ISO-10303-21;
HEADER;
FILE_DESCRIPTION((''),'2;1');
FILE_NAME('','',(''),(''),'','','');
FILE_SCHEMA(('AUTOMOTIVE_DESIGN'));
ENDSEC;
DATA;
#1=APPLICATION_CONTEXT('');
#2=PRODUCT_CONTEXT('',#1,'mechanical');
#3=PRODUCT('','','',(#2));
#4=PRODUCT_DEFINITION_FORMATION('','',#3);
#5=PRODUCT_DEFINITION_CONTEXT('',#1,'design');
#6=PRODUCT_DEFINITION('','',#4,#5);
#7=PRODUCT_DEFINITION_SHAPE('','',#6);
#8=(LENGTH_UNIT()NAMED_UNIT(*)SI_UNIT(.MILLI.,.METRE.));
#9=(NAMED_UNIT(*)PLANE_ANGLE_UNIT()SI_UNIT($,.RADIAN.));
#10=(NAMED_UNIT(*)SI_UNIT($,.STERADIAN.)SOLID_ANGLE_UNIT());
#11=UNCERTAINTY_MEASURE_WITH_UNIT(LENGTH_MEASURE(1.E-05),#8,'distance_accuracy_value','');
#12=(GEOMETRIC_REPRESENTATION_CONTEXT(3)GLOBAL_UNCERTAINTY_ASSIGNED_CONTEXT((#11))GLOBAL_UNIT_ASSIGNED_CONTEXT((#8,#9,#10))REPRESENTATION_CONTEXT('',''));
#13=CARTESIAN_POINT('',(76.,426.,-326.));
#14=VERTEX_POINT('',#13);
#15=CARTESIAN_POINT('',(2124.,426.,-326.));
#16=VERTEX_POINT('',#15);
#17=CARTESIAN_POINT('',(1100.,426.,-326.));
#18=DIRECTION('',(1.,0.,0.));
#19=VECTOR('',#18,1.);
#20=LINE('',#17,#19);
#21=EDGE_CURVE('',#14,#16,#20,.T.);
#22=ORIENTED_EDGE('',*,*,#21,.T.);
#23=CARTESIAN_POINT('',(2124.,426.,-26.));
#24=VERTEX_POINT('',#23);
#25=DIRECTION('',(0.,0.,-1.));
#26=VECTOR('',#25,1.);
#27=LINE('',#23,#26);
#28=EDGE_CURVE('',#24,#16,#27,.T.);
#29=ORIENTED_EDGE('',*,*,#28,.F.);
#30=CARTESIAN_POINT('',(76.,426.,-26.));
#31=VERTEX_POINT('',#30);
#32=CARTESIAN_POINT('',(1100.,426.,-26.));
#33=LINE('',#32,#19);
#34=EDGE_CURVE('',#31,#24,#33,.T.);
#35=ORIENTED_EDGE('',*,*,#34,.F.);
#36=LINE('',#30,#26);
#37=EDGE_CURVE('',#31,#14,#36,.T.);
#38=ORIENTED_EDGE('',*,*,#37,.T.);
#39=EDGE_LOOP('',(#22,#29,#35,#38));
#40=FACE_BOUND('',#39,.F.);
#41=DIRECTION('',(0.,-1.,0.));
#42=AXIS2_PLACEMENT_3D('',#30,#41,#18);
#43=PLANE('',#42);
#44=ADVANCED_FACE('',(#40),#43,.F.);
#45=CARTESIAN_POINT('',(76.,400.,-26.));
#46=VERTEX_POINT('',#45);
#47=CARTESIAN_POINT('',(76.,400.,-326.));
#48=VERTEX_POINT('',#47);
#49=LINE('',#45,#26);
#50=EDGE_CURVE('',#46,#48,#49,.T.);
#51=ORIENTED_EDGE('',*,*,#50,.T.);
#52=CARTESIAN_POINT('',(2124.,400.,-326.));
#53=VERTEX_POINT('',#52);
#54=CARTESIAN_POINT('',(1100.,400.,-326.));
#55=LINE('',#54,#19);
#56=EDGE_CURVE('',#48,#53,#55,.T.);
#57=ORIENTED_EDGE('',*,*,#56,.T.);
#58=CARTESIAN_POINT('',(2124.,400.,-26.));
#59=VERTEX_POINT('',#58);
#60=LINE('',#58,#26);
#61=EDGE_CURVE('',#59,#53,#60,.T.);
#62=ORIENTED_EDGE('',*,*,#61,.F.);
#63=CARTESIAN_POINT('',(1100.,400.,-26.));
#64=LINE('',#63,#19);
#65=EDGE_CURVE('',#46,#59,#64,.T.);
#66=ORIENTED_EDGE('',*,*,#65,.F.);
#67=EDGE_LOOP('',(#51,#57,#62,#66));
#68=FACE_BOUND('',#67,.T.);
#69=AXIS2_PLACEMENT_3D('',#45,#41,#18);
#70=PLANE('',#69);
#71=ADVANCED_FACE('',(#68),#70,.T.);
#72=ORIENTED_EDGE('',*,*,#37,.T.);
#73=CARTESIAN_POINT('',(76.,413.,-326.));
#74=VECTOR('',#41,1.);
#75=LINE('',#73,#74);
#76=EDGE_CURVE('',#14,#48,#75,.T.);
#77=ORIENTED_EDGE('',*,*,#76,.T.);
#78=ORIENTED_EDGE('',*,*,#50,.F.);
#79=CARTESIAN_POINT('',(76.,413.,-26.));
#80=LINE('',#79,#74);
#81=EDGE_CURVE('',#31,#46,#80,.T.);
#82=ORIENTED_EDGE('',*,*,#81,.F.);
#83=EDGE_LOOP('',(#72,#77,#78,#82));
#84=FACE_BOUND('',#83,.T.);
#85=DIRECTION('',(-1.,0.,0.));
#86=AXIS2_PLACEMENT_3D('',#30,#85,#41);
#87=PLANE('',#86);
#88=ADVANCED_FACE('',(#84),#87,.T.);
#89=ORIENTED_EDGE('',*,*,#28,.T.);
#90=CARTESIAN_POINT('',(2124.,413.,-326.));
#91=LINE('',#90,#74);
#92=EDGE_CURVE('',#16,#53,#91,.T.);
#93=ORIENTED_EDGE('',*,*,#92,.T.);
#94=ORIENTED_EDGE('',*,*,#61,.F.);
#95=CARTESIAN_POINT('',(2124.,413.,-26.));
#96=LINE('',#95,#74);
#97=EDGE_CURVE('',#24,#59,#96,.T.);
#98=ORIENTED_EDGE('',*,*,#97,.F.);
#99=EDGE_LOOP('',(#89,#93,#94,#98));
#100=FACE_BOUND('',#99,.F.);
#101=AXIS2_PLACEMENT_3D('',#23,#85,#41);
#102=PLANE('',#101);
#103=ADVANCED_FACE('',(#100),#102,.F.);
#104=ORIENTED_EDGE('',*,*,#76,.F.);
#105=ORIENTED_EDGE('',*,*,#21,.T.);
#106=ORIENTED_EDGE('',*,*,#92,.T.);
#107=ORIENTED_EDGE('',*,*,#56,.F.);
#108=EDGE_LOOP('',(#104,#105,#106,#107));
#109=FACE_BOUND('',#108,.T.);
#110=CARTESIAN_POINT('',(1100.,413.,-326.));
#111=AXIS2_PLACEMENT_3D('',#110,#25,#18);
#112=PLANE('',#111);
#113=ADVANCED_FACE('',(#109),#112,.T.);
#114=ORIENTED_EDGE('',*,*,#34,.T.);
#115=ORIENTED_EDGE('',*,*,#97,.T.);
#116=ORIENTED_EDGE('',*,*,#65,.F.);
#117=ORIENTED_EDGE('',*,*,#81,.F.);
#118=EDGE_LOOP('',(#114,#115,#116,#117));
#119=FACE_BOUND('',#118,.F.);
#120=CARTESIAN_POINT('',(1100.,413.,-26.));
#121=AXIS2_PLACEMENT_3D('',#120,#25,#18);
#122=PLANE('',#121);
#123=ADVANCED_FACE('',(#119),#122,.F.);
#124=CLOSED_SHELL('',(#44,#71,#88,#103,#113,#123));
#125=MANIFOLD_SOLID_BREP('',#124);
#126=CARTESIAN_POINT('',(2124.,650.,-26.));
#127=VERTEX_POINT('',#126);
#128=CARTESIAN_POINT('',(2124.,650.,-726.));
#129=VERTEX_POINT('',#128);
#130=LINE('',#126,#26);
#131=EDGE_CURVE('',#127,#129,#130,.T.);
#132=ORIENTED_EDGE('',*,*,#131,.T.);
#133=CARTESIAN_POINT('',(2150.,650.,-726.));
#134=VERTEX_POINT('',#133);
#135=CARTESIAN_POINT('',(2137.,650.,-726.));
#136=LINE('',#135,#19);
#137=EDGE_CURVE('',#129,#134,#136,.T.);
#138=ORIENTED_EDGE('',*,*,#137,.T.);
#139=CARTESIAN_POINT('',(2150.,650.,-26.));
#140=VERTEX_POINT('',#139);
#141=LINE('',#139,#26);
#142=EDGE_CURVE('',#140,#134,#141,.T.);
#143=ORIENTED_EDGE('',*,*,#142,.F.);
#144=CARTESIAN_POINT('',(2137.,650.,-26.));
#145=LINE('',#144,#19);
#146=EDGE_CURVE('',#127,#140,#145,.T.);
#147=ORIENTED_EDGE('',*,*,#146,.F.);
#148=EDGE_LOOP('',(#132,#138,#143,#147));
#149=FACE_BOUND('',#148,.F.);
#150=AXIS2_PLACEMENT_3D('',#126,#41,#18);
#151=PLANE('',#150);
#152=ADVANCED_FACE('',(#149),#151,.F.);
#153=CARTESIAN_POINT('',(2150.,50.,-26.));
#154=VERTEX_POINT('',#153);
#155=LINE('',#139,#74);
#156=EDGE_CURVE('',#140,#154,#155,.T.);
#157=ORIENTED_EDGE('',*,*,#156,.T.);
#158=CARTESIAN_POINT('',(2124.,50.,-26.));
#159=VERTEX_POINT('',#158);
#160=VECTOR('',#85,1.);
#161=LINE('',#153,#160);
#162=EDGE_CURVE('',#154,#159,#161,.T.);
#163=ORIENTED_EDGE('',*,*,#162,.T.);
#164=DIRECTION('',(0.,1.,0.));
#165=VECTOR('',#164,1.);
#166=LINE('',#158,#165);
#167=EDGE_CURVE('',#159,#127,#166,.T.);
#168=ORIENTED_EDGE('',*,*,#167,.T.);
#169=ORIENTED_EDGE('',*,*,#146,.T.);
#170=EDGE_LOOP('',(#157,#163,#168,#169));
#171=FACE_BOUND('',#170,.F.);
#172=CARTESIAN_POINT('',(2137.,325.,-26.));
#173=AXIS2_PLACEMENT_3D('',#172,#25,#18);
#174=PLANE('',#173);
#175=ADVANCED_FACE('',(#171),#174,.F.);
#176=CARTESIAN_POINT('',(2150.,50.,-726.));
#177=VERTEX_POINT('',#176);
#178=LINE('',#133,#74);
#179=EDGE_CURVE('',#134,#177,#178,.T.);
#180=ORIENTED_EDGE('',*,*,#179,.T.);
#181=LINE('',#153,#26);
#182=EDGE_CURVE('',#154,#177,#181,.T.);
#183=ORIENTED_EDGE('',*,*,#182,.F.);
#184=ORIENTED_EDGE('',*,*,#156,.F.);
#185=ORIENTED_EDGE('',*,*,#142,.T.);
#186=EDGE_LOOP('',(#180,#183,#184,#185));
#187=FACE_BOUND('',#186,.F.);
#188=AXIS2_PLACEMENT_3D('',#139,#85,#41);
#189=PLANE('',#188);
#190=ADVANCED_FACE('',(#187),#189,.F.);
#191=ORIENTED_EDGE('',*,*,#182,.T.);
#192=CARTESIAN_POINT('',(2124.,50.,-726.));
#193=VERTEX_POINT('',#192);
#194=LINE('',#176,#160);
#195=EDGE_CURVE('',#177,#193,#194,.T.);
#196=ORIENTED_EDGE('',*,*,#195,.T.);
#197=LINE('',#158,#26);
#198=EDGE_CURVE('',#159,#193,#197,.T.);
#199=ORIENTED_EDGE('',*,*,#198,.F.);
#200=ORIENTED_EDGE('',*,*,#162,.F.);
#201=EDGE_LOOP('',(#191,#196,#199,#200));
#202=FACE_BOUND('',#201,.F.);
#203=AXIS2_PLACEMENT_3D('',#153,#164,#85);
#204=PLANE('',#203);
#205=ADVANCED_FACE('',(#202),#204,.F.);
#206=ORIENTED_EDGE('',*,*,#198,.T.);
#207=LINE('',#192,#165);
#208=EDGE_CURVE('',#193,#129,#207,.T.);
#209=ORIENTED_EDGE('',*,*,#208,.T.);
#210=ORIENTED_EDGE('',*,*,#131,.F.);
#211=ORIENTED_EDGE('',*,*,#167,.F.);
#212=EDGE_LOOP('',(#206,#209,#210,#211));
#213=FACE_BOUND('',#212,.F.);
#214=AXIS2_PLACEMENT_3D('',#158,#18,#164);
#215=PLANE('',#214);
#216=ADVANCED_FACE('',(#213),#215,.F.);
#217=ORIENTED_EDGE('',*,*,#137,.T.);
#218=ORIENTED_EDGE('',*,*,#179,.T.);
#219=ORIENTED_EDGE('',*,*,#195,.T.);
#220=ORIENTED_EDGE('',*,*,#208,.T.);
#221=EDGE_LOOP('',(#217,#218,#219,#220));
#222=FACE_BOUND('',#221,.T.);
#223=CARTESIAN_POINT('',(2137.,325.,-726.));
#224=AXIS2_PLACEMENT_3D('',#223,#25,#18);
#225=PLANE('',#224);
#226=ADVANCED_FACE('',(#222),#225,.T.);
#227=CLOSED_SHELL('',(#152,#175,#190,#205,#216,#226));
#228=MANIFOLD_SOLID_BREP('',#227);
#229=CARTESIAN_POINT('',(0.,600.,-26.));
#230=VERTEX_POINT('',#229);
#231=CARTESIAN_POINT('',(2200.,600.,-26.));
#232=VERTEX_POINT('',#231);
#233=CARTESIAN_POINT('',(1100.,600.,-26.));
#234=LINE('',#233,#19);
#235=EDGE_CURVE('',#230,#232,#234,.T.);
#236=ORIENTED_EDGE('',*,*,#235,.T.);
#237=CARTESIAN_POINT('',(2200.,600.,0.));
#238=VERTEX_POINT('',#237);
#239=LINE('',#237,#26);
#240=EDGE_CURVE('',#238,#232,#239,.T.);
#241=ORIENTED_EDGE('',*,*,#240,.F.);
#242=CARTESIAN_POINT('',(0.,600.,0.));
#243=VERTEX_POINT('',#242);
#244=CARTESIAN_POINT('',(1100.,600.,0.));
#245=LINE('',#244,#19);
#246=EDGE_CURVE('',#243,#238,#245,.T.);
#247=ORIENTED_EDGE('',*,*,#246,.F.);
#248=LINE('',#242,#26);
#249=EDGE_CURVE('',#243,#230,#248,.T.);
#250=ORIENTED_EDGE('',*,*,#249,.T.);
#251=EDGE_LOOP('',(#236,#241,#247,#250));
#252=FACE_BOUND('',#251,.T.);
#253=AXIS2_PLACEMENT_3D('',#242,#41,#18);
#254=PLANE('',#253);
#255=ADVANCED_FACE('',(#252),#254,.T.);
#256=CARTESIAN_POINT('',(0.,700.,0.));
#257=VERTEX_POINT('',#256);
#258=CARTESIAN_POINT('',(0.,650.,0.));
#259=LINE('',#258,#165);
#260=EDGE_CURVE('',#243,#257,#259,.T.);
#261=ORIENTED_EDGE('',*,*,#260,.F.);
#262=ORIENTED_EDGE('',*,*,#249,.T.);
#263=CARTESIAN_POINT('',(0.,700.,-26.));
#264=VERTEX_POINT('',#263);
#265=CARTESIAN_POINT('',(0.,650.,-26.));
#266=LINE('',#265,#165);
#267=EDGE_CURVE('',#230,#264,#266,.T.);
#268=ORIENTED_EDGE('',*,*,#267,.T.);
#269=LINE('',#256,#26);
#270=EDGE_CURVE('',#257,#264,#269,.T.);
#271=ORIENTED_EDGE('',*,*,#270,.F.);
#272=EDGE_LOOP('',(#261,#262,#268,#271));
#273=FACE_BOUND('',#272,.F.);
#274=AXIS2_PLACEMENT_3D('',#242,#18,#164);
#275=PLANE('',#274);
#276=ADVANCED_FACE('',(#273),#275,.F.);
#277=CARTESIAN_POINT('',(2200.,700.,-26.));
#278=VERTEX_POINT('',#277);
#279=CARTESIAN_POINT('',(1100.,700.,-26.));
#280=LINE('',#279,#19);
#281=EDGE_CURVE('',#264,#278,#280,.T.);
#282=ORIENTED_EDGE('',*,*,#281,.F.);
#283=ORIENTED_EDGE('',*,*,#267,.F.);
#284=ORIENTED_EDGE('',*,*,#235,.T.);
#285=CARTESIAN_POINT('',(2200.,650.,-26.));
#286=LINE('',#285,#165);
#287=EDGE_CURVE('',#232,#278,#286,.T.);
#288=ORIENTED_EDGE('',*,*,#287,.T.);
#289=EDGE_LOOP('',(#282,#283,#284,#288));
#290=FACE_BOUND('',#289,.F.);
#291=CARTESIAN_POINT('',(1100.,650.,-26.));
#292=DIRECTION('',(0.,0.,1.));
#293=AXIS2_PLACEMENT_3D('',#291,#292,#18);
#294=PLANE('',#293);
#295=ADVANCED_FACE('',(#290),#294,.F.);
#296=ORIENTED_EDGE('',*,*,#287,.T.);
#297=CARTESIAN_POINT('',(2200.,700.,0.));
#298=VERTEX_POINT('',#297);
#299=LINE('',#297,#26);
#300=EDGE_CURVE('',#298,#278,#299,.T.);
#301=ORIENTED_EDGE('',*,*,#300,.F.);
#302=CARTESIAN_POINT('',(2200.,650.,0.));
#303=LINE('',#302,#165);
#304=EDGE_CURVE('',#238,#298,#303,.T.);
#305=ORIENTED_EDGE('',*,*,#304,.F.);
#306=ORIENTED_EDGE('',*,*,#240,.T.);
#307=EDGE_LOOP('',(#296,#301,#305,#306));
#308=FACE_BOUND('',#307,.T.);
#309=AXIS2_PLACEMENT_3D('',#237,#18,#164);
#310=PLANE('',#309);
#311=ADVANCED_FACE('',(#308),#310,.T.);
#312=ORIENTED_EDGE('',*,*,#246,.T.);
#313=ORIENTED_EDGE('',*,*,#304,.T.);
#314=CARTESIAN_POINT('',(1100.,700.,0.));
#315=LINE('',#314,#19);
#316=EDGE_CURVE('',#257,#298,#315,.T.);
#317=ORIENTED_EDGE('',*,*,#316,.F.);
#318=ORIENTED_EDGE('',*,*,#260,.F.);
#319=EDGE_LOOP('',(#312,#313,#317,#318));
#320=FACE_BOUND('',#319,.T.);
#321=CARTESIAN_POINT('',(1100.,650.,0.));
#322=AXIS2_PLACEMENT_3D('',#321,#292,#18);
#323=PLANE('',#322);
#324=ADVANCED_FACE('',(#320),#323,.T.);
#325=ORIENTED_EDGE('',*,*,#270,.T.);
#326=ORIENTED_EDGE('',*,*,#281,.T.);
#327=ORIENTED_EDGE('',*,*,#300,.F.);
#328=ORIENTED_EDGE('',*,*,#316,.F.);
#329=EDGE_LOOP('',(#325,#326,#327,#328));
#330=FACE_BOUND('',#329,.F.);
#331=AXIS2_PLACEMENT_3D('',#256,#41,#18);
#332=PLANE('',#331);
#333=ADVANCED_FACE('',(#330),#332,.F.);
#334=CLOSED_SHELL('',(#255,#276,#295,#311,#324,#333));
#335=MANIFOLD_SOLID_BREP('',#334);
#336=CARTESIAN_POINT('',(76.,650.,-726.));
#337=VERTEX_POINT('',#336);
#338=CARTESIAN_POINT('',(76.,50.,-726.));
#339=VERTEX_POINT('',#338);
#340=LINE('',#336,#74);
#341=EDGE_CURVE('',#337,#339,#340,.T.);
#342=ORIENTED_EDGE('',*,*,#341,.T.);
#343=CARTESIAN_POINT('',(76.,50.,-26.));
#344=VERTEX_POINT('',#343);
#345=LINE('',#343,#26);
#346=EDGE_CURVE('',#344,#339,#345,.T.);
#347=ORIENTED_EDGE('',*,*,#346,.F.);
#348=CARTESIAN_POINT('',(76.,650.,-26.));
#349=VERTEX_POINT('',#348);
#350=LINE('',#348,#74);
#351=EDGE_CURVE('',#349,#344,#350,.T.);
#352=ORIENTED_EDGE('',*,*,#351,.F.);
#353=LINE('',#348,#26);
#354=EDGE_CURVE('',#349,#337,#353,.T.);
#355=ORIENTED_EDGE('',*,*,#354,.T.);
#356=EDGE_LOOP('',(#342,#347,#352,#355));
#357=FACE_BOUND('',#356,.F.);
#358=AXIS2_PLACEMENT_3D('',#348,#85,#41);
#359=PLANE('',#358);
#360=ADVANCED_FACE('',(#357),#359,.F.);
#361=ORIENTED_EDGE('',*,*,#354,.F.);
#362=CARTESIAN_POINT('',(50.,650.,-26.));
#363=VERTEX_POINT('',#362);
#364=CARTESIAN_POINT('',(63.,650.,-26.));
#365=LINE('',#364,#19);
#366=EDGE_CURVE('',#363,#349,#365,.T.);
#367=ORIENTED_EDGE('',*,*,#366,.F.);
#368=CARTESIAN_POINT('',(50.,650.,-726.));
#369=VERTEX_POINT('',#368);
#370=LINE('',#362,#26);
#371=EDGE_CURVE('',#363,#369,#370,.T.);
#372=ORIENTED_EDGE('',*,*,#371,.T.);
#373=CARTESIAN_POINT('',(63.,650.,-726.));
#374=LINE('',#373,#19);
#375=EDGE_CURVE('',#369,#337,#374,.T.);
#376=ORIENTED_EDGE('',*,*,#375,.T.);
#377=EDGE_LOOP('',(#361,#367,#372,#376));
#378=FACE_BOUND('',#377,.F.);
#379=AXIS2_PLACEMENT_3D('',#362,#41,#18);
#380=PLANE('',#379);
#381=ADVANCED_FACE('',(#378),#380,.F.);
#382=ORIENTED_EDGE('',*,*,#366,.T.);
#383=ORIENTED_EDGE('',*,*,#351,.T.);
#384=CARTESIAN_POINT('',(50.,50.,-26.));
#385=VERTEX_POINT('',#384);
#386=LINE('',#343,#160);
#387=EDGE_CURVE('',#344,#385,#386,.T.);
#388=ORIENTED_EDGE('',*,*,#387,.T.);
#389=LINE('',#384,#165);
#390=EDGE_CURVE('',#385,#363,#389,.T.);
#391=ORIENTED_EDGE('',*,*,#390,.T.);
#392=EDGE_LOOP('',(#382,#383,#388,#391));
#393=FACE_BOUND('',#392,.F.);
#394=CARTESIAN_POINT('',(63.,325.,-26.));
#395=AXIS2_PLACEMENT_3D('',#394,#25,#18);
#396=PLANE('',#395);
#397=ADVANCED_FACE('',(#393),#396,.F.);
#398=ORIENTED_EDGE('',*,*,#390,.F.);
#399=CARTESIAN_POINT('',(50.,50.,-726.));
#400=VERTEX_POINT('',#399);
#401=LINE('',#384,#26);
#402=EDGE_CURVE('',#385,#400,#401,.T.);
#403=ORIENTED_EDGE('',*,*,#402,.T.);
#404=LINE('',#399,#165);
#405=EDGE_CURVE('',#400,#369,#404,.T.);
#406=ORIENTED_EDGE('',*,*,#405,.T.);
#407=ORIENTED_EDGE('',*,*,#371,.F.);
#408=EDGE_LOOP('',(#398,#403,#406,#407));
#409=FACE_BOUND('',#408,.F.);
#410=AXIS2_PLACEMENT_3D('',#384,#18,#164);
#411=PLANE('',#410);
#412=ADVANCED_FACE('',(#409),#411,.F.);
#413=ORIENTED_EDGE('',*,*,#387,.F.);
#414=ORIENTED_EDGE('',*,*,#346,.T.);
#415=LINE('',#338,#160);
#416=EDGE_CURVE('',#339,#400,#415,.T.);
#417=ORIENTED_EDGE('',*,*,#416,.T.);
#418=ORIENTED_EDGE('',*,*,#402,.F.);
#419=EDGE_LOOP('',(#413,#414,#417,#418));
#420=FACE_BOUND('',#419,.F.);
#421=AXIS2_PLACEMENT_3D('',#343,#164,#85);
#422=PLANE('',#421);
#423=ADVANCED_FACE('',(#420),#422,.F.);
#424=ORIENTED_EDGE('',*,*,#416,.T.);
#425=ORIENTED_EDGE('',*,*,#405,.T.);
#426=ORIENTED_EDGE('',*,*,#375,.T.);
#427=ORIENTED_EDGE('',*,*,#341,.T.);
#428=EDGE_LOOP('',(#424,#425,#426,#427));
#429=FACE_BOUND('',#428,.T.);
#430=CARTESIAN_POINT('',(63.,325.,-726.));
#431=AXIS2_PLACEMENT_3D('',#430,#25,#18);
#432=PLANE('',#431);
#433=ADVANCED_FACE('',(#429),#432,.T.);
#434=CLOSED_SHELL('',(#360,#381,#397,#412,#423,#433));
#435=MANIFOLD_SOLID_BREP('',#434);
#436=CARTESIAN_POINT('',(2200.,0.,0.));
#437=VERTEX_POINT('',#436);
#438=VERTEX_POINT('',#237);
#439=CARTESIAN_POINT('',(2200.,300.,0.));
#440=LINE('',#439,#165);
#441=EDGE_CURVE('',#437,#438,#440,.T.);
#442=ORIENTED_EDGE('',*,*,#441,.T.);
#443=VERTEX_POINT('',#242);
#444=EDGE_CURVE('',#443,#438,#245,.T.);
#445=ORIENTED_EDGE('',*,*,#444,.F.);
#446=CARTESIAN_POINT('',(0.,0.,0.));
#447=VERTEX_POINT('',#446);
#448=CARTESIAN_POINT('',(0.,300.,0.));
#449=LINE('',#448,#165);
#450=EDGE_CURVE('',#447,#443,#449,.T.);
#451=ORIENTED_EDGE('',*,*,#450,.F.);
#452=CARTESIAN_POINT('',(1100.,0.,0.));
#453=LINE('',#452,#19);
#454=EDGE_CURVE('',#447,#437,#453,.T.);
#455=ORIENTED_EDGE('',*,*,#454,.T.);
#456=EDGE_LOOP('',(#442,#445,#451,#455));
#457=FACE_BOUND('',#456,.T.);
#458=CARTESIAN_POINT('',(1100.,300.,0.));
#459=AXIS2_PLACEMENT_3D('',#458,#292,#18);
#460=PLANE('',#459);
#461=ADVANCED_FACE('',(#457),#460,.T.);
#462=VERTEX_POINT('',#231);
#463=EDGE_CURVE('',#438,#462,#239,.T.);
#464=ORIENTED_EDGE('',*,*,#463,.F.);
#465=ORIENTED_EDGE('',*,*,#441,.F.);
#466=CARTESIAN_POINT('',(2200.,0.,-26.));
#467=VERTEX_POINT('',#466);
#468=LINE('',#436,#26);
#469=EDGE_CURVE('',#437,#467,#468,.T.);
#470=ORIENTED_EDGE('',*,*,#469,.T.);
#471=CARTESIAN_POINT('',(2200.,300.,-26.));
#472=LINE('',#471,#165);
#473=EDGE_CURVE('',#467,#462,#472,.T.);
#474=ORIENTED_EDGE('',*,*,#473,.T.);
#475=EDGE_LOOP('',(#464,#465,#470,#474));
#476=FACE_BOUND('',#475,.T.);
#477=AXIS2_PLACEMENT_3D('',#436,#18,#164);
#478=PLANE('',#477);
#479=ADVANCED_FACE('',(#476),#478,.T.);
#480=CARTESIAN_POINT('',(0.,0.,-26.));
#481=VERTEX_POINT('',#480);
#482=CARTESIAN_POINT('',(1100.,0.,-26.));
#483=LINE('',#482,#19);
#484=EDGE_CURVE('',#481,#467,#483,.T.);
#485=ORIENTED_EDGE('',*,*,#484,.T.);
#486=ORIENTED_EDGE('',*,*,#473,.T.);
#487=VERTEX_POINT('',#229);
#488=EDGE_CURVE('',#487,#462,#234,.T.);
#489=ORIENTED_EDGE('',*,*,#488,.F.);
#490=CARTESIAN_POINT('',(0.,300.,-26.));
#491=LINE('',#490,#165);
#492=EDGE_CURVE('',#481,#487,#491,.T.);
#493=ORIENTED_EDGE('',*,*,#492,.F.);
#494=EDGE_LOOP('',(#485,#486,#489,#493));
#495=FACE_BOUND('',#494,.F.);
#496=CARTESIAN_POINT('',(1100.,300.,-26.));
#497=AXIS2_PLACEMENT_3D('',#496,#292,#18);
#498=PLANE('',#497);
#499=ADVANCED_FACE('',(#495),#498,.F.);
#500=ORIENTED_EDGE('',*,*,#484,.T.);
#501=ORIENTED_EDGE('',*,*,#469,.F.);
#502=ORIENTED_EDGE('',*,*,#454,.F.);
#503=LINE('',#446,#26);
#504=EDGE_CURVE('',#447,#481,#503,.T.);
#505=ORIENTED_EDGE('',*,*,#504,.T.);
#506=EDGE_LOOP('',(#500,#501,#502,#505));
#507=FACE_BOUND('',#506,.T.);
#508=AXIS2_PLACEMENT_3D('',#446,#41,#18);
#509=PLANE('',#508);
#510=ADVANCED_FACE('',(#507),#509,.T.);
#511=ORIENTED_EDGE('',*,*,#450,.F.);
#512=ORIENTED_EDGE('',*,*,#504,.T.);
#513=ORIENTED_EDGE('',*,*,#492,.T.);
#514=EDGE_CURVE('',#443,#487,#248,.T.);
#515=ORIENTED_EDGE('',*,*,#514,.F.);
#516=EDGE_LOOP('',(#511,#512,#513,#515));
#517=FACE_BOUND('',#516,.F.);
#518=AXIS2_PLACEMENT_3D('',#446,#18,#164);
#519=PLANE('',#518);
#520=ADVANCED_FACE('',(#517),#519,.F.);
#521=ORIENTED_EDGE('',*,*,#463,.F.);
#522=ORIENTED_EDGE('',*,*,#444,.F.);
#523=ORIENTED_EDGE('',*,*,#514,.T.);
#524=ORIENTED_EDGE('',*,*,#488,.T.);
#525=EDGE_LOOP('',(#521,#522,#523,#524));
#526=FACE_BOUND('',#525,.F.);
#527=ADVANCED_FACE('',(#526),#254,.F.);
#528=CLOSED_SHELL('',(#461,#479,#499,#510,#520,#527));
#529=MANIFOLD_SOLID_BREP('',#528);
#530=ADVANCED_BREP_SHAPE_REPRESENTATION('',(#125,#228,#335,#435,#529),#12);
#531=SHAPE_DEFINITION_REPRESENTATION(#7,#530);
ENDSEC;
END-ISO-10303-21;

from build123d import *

# Parameters (mm, degrees)
F0_W     = 2200
F0_H     = 600
F1_DEPTH = 26
F0_H_2   = 100
F2_DEPTH = 26
F3_W     = 26
F3_H     = 50
F4_DEPTH = 700
F3_W_2   = 2048
F3_H_2   = 26
F5_DEPTH = 300


# Not quite as in the source:
# - a feature of the source that left no trace in its solid (it failed there, or was rolled back) is left out


with BuildPart() as f1:
    # F0 (on Top) → F1 (new body)
    with BuildSketch(Plane.XY):
        with Locations((1100, 300)):
            Rectangle(F0_W, F0_H)
    extrude(amount=-F1_DEPTH)


with BuildPart() as f2:
    # F0 (on Top) → F2 (new body)
    with BuildSketch(Plane.XY):
        with Locations((1100, 650)):
            Rectangle(F0_W, F0_H_2)
    extrude(amount=-F2_DEPTH)


with BuildPart() as f4:
    # F3 (on face) → F4 (new body)
    with BuildSketch(Plane(origin=(0, 0, -26), x_dir=(1, 0, 0), z_dir=(0, 0, -1))):
        Polygon((2124, -426), (2124, -600), (2150, -600), (2150, -50), (2124, -50), (2124, -400), align=None)
        with Locations((2137, -625)):
            Rectangle(F3_W, F3_H)
    extrude(amount=F4_DEPTH)


with BuildPart() as f4b:
    # F3 (on face) → F4, piece 2 (new body)
    with BuildSketch(Plane(origin=(0, 0, -26), x_dir=(1, 0, 0), z_dir=(0, 0, -1))):
        Polygon((50, -600), (76, -600), (76, -426), (76, -400), (76, -50), (50, -50), align=None)
        with Locations((63, -625)):
            Rectangle(F3_W, F3_H)
    extrude(amount=F4_DEPTH)


with BuildPart() as f5:
    # F3 (on face) → F5 (new body)
    with BuildSketch(Plane(origin=(0, 0, -26), x_dir=(1, 0, 0), z_dir=(0, 0, -1))):
        with Locations((1100, -413)):
            Rectangle(F3_W_2, F3_H_2)
    extrude(amount=F5_DEPTH)


solid = Compound([f1.part, f2.part, f4.part, f4b.part, f5.part])
